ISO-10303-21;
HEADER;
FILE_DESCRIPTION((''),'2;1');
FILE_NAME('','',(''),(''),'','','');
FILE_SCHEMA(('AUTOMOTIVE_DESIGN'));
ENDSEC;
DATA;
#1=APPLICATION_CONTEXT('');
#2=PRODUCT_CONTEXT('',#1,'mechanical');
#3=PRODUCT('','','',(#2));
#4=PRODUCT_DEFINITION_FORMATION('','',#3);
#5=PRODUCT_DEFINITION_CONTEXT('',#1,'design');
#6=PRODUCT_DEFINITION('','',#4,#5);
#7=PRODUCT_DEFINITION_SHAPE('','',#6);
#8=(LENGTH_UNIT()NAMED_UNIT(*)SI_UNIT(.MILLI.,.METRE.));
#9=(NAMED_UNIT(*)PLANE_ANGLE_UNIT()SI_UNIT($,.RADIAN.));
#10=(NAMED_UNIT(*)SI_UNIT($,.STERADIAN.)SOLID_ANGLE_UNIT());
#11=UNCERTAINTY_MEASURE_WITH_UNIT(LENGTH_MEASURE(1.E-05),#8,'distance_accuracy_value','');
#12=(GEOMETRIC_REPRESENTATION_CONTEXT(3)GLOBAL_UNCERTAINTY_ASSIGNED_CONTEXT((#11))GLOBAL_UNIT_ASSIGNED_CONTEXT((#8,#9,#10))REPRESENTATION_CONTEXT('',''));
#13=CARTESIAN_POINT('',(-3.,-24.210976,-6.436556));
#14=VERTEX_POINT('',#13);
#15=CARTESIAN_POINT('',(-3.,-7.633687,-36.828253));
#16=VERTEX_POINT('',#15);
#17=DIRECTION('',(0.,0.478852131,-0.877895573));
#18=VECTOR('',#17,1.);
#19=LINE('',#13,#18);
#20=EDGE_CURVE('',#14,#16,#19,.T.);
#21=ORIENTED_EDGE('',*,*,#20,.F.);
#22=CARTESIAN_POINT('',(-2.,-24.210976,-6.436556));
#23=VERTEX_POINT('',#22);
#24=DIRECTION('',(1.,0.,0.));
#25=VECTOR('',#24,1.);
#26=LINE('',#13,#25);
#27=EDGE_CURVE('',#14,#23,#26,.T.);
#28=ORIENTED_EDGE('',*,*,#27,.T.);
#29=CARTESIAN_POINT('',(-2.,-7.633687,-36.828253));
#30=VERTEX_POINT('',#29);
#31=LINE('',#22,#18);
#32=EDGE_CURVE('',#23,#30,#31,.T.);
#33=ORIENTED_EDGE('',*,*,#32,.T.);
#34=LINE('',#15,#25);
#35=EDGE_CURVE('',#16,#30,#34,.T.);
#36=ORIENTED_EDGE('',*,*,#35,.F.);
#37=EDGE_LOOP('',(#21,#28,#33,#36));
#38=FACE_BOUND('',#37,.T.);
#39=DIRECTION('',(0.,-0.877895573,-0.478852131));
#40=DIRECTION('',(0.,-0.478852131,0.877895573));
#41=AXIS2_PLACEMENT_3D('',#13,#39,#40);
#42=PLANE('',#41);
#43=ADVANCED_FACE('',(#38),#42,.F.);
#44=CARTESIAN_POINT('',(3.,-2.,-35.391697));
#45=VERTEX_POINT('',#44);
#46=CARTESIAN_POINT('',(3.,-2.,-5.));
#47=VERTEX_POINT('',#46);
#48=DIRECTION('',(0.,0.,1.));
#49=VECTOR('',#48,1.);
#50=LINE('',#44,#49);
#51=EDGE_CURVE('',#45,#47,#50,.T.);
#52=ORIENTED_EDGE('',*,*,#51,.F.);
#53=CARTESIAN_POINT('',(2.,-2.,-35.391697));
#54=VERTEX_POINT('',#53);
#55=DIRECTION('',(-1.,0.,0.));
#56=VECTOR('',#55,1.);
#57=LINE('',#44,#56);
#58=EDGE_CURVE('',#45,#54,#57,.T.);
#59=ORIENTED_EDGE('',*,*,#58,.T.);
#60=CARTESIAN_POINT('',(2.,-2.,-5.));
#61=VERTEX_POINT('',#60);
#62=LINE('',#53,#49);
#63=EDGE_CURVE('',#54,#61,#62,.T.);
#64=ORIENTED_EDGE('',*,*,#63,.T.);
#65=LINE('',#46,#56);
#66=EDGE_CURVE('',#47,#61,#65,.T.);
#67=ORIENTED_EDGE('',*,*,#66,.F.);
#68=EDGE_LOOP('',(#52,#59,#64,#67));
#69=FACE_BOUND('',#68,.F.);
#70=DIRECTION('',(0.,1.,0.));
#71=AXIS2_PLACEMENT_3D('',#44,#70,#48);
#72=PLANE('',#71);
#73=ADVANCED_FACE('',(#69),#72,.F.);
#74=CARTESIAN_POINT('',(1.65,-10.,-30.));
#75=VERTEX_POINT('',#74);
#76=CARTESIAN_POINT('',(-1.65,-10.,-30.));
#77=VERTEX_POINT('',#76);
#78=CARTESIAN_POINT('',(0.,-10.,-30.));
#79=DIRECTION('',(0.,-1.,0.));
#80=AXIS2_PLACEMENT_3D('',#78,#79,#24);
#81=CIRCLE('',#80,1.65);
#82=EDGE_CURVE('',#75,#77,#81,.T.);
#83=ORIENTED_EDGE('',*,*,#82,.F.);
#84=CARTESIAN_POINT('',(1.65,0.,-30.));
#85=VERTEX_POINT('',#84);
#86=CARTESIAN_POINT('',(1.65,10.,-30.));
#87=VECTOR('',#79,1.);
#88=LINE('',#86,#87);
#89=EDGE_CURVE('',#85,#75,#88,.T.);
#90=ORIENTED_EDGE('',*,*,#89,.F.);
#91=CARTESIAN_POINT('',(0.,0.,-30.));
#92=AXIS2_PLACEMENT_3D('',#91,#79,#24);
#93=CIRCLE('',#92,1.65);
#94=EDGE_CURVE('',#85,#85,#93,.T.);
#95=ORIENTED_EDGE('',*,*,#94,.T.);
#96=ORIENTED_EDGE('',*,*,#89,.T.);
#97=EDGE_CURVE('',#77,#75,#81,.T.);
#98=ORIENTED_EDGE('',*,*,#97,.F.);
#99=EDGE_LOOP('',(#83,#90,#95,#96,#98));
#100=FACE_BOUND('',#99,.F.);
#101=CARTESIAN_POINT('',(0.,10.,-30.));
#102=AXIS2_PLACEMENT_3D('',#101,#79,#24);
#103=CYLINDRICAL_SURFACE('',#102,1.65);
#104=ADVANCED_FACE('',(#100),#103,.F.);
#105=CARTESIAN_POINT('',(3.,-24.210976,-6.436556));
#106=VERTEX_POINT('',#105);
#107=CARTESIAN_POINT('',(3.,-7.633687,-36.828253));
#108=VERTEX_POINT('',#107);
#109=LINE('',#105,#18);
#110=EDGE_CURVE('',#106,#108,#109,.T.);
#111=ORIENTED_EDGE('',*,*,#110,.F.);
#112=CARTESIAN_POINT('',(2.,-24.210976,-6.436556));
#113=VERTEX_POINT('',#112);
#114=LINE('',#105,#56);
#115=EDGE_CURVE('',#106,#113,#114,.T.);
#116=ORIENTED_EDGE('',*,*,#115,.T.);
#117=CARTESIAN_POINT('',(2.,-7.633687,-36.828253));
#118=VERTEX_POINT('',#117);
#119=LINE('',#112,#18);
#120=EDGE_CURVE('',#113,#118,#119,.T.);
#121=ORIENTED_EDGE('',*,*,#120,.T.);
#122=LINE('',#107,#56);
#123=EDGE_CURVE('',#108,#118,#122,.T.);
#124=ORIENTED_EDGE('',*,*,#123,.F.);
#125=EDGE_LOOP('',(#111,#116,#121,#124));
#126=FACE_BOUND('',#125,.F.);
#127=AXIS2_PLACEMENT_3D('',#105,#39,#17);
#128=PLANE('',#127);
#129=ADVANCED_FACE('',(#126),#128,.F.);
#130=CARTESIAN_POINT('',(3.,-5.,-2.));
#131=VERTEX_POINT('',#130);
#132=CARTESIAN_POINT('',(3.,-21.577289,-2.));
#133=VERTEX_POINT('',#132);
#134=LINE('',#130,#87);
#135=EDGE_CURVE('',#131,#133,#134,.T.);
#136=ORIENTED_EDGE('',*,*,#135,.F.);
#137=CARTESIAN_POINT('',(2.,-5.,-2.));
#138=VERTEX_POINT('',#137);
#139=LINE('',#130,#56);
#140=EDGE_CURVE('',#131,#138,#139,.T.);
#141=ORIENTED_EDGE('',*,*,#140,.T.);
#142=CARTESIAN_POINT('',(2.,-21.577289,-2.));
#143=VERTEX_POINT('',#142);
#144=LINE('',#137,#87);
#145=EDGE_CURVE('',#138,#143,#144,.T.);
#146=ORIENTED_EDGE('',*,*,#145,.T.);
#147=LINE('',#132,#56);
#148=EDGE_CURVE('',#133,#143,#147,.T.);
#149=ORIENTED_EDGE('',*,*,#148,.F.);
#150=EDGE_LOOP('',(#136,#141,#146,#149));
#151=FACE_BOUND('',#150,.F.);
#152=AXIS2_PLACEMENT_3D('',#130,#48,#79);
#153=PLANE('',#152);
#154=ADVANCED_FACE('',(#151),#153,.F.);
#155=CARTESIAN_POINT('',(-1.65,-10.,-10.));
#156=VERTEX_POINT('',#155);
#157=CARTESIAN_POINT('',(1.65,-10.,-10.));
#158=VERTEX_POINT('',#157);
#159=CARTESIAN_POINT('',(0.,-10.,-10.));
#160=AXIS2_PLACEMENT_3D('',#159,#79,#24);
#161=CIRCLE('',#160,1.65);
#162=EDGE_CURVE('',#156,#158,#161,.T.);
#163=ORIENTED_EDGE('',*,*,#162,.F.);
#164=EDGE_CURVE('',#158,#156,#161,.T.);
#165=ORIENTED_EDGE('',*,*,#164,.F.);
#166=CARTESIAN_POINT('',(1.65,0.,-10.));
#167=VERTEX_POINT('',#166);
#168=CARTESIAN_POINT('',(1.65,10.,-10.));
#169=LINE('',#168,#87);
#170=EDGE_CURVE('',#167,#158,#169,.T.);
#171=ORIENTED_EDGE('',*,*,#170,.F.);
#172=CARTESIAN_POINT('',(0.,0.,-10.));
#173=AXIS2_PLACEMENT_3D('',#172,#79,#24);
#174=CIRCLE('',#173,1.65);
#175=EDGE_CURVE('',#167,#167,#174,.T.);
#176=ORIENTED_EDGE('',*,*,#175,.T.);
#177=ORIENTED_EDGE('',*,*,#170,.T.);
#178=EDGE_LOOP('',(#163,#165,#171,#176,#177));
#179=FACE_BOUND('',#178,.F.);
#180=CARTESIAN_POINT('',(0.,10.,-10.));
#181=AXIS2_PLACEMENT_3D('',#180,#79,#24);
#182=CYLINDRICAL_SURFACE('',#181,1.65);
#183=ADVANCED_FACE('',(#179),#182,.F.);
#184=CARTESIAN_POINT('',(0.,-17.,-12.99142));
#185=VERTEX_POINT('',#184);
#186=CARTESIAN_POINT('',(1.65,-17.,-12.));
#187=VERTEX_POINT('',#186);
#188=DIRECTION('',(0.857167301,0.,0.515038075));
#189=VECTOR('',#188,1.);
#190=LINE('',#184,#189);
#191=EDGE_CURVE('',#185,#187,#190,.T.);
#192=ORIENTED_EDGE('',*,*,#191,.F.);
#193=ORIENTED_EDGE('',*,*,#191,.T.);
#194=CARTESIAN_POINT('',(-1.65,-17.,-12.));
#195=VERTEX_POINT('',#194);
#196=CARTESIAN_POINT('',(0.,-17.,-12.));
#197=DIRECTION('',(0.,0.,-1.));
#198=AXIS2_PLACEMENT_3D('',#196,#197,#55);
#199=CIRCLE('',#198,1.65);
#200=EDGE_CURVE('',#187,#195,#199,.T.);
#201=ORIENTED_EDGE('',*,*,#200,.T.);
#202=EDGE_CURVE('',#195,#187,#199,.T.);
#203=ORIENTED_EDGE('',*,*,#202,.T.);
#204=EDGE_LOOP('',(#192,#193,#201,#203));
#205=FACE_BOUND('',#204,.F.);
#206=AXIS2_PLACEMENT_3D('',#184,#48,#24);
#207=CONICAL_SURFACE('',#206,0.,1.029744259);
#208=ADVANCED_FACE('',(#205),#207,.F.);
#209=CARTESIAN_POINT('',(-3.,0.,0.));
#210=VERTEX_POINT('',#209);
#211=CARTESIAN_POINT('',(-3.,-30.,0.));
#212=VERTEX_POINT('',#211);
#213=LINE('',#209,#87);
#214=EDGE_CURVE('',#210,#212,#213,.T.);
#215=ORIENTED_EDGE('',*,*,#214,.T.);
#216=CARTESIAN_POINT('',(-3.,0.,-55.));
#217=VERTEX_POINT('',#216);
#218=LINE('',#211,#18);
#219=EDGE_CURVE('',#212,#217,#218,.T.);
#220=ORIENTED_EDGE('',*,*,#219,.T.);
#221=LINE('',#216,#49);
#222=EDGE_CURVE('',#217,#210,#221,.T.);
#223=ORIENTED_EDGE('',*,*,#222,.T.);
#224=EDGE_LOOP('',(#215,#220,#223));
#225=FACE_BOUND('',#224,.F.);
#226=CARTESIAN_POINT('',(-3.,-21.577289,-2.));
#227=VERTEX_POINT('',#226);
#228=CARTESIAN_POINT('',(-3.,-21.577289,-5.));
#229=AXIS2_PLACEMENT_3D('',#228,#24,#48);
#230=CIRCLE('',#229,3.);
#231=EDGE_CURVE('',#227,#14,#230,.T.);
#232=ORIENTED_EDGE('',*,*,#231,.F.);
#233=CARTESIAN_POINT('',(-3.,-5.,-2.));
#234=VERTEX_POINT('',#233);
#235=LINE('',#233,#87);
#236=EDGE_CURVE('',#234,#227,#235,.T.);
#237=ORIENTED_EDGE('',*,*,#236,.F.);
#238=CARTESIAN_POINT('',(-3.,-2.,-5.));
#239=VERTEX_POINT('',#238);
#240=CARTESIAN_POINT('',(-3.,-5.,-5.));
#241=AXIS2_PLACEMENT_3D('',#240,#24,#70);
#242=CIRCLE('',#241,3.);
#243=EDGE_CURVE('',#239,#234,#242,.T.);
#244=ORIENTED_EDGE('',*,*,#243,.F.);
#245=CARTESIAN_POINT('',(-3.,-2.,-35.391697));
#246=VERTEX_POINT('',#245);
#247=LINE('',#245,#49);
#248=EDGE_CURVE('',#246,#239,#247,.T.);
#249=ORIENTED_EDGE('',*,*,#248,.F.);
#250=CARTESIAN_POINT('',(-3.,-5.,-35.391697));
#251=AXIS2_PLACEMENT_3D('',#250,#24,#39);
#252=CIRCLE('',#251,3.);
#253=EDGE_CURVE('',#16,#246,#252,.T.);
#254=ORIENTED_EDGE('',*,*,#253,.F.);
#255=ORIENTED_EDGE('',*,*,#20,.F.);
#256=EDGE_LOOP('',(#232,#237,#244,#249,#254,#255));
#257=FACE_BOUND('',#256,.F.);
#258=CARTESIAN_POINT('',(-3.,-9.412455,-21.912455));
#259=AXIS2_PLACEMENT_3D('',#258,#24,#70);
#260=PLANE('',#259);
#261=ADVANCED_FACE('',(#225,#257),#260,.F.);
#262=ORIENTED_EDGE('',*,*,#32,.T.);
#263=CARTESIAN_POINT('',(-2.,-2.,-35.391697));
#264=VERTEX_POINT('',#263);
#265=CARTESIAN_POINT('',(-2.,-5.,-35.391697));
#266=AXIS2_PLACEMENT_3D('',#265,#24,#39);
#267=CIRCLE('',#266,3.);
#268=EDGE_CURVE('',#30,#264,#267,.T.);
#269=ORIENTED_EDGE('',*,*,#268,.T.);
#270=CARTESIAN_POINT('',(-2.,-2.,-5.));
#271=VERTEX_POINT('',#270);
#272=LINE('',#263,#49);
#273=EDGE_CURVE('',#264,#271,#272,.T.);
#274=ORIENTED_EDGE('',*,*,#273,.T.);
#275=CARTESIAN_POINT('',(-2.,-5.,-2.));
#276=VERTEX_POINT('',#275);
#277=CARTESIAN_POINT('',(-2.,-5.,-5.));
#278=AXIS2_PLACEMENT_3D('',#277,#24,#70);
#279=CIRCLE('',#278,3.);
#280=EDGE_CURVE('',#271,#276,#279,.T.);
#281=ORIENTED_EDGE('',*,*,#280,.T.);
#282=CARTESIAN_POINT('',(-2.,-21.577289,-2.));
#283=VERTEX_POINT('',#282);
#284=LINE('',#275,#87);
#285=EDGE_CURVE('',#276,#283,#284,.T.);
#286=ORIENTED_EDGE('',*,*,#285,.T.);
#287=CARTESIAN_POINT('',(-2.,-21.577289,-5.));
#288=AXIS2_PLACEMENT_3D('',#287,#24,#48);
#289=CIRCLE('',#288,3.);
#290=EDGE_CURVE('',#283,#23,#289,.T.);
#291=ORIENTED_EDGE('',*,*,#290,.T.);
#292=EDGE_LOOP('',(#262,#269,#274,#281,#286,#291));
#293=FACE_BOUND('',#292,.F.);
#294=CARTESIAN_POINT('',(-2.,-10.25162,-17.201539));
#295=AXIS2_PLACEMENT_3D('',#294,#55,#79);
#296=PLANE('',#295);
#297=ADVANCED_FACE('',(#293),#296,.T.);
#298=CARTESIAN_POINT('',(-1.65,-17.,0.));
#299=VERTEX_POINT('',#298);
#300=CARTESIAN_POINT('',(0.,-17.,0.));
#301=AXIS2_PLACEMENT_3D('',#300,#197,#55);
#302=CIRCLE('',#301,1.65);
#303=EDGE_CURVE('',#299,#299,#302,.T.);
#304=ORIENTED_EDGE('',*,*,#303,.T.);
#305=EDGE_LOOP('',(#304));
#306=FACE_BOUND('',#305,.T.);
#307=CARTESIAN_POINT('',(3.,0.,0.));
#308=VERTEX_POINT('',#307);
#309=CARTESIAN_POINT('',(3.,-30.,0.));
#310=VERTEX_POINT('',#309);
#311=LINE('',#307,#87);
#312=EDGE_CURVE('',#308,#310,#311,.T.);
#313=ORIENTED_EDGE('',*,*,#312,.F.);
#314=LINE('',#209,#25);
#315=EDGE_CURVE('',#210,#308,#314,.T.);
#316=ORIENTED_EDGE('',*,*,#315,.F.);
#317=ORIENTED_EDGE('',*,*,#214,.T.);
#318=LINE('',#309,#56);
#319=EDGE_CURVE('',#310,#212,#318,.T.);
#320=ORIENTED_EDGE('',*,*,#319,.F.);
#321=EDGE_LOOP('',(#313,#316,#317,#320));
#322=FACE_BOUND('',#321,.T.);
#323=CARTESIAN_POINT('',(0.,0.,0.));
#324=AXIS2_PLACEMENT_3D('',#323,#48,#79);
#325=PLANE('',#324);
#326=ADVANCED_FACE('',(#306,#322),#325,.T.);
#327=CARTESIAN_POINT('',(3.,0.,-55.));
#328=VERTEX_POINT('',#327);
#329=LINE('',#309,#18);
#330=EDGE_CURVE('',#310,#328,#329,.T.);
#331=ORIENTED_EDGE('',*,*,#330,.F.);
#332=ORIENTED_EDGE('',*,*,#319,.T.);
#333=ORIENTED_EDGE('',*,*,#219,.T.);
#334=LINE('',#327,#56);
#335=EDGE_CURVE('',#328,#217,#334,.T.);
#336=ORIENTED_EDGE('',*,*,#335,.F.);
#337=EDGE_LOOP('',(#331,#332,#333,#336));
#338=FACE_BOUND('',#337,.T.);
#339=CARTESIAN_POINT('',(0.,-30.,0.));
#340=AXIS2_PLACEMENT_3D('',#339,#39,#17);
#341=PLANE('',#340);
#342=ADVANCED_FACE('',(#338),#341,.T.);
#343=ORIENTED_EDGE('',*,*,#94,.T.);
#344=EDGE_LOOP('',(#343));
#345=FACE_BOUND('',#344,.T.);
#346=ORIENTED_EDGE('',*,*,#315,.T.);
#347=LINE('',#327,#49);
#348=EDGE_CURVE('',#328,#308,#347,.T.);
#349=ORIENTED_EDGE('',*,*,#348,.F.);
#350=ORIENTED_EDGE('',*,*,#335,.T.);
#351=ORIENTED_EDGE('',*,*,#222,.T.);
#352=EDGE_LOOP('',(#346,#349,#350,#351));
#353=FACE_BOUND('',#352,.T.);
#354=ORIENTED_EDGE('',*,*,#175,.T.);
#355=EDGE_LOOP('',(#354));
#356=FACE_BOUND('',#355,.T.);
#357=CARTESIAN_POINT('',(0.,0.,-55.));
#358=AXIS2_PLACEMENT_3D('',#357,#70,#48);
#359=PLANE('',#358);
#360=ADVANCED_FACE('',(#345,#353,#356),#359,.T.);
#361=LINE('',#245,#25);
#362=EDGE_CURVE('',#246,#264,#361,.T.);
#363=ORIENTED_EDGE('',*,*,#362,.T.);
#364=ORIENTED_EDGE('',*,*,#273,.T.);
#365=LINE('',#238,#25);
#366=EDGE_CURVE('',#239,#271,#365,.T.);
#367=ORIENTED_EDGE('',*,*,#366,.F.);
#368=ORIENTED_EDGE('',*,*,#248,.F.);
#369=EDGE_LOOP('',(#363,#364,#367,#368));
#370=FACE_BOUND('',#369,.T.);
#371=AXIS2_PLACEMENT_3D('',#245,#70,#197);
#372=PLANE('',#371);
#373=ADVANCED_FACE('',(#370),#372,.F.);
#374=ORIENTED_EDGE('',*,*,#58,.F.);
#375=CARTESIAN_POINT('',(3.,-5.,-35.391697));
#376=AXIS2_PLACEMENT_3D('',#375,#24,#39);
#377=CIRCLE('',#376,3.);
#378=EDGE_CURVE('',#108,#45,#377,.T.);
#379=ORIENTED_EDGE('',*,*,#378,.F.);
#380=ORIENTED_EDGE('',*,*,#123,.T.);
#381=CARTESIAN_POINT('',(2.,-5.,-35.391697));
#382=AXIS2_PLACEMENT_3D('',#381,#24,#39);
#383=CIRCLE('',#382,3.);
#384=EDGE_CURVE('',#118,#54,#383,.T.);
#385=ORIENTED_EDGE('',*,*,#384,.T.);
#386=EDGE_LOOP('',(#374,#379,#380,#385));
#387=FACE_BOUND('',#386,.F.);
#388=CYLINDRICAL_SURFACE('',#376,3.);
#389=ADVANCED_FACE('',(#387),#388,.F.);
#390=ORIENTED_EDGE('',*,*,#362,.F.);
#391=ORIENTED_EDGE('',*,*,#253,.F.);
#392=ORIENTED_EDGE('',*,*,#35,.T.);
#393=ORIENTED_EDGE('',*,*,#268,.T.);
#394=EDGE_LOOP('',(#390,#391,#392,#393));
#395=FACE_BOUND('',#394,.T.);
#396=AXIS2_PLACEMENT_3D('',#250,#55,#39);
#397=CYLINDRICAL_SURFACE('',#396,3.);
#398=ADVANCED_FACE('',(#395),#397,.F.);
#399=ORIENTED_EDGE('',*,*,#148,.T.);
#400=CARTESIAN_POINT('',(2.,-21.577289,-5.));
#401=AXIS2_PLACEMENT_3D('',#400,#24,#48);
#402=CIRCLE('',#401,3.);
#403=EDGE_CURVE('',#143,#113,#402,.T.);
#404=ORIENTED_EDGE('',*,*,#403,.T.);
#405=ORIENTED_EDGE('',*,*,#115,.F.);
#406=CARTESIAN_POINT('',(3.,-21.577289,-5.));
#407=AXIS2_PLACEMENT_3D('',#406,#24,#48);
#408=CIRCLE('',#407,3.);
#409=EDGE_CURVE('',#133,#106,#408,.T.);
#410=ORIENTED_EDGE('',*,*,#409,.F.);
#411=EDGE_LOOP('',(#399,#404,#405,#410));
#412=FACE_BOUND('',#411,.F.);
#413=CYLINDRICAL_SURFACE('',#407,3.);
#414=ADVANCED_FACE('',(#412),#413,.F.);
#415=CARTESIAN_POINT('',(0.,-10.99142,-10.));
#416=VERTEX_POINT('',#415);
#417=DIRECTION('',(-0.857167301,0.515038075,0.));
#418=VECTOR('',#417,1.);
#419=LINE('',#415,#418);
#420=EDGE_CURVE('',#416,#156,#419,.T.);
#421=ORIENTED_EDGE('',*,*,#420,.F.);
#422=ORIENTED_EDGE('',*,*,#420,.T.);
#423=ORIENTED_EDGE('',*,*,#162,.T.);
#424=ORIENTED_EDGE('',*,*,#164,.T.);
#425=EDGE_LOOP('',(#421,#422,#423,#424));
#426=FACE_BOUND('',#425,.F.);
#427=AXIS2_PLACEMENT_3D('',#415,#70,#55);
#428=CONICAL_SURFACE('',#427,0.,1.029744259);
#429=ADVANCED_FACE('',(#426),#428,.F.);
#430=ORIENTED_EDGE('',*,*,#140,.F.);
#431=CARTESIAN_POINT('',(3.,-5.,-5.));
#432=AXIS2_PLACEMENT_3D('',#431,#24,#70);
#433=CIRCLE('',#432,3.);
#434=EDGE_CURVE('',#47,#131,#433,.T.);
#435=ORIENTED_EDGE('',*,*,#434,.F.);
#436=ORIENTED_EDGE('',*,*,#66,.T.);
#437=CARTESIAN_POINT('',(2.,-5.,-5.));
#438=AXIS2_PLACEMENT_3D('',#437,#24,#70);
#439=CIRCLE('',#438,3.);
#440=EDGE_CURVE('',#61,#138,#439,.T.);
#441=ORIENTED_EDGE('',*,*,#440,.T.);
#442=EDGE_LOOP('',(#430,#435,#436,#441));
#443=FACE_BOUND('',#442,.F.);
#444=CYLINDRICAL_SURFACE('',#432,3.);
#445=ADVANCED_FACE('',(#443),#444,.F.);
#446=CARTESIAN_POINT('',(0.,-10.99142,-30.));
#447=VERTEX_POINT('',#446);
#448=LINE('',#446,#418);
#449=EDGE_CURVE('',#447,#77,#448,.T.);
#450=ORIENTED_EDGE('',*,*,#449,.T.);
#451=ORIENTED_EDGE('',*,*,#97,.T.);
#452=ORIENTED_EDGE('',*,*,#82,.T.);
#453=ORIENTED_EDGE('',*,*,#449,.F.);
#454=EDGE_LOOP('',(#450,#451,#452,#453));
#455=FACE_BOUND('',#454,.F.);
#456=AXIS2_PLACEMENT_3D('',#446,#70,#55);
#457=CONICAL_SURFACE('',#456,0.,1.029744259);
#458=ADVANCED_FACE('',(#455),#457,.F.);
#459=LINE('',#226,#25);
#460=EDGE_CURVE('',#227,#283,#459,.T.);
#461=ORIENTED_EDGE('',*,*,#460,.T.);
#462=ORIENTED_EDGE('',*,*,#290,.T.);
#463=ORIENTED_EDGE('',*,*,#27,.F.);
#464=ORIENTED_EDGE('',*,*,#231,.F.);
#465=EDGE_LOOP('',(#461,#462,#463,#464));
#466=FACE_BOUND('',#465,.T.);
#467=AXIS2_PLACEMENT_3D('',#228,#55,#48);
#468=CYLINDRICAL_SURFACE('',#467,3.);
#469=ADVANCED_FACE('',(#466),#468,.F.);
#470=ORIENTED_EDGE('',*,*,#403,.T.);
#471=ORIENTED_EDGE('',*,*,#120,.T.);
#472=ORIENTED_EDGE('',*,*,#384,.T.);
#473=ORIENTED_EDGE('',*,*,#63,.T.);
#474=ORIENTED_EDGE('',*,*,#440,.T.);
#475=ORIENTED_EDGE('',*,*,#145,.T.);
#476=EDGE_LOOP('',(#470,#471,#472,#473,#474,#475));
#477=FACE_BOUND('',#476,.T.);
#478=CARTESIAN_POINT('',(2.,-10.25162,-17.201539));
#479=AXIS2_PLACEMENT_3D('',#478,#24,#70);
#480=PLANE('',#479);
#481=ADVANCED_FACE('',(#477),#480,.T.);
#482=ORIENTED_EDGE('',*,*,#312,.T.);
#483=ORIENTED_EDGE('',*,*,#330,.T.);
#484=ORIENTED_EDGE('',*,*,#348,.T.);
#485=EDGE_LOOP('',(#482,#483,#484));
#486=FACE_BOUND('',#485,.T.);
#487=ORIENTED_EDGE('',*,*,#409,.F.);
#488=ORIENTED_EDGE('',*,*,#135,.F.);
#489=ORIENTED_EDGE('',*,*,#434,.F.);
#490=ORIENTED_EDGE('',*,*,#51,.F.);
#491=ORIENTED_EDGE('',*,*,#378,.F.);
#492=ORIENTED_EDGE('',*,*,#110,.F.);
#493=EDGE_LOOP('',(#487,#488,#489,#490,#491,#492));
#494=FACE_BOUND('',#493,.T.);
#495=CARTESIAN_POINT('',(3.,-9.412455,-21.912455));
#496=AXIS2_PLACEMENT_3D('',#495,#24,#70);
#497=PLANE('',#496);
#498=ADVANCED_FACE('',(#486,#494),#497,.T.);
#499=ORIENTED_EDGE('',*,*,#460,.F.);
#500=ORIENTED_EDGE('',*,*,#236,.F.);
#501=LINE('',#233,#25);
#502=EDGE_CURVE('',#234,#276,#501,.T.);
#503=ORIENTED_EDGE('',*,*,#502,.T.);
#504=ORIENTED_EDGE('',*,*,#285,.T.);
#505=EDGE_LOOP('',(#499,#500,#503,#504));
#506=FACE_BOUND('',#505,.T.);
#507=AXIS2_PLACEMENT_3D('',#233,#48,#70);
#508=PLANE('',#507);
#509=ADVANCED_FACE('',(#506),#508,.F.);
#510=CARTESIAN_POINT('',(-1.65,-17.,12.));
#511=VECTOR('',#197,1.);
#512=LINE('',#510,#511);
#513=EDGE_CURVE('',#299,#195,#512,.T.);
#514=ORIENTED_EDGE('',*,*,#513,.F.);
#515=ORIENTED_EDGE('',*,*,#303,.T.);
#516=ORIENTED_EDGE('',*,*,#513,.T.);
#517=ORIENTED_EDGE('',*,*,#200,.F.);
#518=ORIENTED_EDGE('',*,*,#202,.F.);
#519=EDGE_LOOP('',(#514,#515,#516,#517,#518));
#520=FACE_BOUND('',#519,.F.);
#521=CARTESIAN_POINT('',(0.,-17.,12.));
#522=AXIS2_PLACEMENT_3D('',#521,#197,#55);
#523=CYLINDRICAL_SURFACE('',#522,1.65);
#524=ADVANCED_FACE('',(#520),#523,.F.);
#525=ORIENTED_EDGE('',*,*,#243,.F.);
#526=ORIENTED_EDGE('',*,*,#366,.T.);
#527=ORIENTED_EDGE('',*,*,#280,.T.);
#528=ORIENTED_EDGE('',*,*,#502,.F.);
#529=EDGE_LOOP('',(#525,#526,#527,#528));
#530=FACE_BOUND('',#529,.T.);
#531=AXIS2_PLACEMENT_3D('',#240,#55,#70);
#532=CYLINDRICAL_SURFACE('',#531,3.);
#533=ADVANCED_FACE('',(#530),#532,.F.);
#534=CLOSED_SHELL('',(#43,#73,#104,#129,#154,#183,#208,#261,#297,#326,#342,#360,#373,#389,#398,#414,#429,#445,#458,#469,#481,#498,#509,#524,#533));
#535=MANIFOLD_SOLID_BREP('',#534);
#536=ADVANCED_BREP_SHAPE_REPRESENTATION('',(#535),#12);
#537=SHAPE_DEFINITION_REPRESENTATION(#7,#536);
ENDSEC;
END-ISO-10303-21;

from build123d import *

# Parameters (mm, degrees)
F1_DEPTH = 3
F3_D     = 3.3
F3_DEPTH = 10
F3_TIP   = 0.9914200214
F5_D     = 3.3
F5_DEPTH = 12
F5_TIP   = 0.9914200214
F7_DEPTH = 1


# Not quite as in the source:
# - a pattern or mirror of a feature is missing from the dataset's text; its kind, count and spacing are read off the source's solid
# - a feature names something its author has since deleted; it is built from what else it names


with BuildPart() as f1:
    # F0 (on Right) → F1 (new body, symmetric)
    with BuildSketch(Plane.YZ):
        Polygon((0, -55), (0, 0), (-30, 0), align=None)
    extrude(amount=F1_DEPTH, both=True)

    # F3
    with Locations(Plane(origin=(0, 0, 0), x_dir=(-1, 0, 0), z_dir=(0, 1, 0))):
        with Locations((0, -10), (0, -30)):
            Hole(F3_D / 2, depth=F3_DEPTH)
            with Locations((0, 0, -(F3_DEPTH + F3_TIP / 2))):  # 118° drill point
                Cone(0, F3_D / 2, F3_TIP, mode=Mode.SUBTRACT)

    # F5
    with Locations(Plane.XY):
        with Locations((0, -17)):
            Hole(F5_D / 2, depth=F5_DEPTH)
            with Locations((0, 0, -(F5_DEPTH + F5_TIP / 2))):  # 118° drill point
                Cone(0, F5_D / 2, F5_TIP, mode=Mode.SUBTRACT)

    # F6 (on face) → F7 (cut)
    with BuildSketch(Plane.YZ.offset(3)):
        with BuildLine():
            ThreePointArc((-2, -5), (-2.8786796564, -2.8786796564), (-5, -2))
            Line((-5, -2), (-21.5772890518, -2))
            ThreePointArc((-21.5772890518, -2), (-24.1569856595, -3.4686067089), (-24.2109757705, -6.436556392))
            Line((-24.2109757705, -6.436556392), (-7.6336867187, -36.8282529869))
            ThreePointArc((-7.6336867187, -36.8282529869), (-4.258737616, -38.2986761404), (-2, -35.3916965949))
            Line((-2, -35.3916965949), (-2, -5))
        make_face()
    f7 = extrude(amount=-F7_DEPTH, mode=Mode.SUBTRACT)

    # F7_copies: F7 across plane
    add(f7.mirror(Plane(origin=(0, 0, 0), x_dir=(0, 0, -1), z_dir=(-1, 0, 0))), mode=Mode.SUBTRACT)


solid = f1.part
